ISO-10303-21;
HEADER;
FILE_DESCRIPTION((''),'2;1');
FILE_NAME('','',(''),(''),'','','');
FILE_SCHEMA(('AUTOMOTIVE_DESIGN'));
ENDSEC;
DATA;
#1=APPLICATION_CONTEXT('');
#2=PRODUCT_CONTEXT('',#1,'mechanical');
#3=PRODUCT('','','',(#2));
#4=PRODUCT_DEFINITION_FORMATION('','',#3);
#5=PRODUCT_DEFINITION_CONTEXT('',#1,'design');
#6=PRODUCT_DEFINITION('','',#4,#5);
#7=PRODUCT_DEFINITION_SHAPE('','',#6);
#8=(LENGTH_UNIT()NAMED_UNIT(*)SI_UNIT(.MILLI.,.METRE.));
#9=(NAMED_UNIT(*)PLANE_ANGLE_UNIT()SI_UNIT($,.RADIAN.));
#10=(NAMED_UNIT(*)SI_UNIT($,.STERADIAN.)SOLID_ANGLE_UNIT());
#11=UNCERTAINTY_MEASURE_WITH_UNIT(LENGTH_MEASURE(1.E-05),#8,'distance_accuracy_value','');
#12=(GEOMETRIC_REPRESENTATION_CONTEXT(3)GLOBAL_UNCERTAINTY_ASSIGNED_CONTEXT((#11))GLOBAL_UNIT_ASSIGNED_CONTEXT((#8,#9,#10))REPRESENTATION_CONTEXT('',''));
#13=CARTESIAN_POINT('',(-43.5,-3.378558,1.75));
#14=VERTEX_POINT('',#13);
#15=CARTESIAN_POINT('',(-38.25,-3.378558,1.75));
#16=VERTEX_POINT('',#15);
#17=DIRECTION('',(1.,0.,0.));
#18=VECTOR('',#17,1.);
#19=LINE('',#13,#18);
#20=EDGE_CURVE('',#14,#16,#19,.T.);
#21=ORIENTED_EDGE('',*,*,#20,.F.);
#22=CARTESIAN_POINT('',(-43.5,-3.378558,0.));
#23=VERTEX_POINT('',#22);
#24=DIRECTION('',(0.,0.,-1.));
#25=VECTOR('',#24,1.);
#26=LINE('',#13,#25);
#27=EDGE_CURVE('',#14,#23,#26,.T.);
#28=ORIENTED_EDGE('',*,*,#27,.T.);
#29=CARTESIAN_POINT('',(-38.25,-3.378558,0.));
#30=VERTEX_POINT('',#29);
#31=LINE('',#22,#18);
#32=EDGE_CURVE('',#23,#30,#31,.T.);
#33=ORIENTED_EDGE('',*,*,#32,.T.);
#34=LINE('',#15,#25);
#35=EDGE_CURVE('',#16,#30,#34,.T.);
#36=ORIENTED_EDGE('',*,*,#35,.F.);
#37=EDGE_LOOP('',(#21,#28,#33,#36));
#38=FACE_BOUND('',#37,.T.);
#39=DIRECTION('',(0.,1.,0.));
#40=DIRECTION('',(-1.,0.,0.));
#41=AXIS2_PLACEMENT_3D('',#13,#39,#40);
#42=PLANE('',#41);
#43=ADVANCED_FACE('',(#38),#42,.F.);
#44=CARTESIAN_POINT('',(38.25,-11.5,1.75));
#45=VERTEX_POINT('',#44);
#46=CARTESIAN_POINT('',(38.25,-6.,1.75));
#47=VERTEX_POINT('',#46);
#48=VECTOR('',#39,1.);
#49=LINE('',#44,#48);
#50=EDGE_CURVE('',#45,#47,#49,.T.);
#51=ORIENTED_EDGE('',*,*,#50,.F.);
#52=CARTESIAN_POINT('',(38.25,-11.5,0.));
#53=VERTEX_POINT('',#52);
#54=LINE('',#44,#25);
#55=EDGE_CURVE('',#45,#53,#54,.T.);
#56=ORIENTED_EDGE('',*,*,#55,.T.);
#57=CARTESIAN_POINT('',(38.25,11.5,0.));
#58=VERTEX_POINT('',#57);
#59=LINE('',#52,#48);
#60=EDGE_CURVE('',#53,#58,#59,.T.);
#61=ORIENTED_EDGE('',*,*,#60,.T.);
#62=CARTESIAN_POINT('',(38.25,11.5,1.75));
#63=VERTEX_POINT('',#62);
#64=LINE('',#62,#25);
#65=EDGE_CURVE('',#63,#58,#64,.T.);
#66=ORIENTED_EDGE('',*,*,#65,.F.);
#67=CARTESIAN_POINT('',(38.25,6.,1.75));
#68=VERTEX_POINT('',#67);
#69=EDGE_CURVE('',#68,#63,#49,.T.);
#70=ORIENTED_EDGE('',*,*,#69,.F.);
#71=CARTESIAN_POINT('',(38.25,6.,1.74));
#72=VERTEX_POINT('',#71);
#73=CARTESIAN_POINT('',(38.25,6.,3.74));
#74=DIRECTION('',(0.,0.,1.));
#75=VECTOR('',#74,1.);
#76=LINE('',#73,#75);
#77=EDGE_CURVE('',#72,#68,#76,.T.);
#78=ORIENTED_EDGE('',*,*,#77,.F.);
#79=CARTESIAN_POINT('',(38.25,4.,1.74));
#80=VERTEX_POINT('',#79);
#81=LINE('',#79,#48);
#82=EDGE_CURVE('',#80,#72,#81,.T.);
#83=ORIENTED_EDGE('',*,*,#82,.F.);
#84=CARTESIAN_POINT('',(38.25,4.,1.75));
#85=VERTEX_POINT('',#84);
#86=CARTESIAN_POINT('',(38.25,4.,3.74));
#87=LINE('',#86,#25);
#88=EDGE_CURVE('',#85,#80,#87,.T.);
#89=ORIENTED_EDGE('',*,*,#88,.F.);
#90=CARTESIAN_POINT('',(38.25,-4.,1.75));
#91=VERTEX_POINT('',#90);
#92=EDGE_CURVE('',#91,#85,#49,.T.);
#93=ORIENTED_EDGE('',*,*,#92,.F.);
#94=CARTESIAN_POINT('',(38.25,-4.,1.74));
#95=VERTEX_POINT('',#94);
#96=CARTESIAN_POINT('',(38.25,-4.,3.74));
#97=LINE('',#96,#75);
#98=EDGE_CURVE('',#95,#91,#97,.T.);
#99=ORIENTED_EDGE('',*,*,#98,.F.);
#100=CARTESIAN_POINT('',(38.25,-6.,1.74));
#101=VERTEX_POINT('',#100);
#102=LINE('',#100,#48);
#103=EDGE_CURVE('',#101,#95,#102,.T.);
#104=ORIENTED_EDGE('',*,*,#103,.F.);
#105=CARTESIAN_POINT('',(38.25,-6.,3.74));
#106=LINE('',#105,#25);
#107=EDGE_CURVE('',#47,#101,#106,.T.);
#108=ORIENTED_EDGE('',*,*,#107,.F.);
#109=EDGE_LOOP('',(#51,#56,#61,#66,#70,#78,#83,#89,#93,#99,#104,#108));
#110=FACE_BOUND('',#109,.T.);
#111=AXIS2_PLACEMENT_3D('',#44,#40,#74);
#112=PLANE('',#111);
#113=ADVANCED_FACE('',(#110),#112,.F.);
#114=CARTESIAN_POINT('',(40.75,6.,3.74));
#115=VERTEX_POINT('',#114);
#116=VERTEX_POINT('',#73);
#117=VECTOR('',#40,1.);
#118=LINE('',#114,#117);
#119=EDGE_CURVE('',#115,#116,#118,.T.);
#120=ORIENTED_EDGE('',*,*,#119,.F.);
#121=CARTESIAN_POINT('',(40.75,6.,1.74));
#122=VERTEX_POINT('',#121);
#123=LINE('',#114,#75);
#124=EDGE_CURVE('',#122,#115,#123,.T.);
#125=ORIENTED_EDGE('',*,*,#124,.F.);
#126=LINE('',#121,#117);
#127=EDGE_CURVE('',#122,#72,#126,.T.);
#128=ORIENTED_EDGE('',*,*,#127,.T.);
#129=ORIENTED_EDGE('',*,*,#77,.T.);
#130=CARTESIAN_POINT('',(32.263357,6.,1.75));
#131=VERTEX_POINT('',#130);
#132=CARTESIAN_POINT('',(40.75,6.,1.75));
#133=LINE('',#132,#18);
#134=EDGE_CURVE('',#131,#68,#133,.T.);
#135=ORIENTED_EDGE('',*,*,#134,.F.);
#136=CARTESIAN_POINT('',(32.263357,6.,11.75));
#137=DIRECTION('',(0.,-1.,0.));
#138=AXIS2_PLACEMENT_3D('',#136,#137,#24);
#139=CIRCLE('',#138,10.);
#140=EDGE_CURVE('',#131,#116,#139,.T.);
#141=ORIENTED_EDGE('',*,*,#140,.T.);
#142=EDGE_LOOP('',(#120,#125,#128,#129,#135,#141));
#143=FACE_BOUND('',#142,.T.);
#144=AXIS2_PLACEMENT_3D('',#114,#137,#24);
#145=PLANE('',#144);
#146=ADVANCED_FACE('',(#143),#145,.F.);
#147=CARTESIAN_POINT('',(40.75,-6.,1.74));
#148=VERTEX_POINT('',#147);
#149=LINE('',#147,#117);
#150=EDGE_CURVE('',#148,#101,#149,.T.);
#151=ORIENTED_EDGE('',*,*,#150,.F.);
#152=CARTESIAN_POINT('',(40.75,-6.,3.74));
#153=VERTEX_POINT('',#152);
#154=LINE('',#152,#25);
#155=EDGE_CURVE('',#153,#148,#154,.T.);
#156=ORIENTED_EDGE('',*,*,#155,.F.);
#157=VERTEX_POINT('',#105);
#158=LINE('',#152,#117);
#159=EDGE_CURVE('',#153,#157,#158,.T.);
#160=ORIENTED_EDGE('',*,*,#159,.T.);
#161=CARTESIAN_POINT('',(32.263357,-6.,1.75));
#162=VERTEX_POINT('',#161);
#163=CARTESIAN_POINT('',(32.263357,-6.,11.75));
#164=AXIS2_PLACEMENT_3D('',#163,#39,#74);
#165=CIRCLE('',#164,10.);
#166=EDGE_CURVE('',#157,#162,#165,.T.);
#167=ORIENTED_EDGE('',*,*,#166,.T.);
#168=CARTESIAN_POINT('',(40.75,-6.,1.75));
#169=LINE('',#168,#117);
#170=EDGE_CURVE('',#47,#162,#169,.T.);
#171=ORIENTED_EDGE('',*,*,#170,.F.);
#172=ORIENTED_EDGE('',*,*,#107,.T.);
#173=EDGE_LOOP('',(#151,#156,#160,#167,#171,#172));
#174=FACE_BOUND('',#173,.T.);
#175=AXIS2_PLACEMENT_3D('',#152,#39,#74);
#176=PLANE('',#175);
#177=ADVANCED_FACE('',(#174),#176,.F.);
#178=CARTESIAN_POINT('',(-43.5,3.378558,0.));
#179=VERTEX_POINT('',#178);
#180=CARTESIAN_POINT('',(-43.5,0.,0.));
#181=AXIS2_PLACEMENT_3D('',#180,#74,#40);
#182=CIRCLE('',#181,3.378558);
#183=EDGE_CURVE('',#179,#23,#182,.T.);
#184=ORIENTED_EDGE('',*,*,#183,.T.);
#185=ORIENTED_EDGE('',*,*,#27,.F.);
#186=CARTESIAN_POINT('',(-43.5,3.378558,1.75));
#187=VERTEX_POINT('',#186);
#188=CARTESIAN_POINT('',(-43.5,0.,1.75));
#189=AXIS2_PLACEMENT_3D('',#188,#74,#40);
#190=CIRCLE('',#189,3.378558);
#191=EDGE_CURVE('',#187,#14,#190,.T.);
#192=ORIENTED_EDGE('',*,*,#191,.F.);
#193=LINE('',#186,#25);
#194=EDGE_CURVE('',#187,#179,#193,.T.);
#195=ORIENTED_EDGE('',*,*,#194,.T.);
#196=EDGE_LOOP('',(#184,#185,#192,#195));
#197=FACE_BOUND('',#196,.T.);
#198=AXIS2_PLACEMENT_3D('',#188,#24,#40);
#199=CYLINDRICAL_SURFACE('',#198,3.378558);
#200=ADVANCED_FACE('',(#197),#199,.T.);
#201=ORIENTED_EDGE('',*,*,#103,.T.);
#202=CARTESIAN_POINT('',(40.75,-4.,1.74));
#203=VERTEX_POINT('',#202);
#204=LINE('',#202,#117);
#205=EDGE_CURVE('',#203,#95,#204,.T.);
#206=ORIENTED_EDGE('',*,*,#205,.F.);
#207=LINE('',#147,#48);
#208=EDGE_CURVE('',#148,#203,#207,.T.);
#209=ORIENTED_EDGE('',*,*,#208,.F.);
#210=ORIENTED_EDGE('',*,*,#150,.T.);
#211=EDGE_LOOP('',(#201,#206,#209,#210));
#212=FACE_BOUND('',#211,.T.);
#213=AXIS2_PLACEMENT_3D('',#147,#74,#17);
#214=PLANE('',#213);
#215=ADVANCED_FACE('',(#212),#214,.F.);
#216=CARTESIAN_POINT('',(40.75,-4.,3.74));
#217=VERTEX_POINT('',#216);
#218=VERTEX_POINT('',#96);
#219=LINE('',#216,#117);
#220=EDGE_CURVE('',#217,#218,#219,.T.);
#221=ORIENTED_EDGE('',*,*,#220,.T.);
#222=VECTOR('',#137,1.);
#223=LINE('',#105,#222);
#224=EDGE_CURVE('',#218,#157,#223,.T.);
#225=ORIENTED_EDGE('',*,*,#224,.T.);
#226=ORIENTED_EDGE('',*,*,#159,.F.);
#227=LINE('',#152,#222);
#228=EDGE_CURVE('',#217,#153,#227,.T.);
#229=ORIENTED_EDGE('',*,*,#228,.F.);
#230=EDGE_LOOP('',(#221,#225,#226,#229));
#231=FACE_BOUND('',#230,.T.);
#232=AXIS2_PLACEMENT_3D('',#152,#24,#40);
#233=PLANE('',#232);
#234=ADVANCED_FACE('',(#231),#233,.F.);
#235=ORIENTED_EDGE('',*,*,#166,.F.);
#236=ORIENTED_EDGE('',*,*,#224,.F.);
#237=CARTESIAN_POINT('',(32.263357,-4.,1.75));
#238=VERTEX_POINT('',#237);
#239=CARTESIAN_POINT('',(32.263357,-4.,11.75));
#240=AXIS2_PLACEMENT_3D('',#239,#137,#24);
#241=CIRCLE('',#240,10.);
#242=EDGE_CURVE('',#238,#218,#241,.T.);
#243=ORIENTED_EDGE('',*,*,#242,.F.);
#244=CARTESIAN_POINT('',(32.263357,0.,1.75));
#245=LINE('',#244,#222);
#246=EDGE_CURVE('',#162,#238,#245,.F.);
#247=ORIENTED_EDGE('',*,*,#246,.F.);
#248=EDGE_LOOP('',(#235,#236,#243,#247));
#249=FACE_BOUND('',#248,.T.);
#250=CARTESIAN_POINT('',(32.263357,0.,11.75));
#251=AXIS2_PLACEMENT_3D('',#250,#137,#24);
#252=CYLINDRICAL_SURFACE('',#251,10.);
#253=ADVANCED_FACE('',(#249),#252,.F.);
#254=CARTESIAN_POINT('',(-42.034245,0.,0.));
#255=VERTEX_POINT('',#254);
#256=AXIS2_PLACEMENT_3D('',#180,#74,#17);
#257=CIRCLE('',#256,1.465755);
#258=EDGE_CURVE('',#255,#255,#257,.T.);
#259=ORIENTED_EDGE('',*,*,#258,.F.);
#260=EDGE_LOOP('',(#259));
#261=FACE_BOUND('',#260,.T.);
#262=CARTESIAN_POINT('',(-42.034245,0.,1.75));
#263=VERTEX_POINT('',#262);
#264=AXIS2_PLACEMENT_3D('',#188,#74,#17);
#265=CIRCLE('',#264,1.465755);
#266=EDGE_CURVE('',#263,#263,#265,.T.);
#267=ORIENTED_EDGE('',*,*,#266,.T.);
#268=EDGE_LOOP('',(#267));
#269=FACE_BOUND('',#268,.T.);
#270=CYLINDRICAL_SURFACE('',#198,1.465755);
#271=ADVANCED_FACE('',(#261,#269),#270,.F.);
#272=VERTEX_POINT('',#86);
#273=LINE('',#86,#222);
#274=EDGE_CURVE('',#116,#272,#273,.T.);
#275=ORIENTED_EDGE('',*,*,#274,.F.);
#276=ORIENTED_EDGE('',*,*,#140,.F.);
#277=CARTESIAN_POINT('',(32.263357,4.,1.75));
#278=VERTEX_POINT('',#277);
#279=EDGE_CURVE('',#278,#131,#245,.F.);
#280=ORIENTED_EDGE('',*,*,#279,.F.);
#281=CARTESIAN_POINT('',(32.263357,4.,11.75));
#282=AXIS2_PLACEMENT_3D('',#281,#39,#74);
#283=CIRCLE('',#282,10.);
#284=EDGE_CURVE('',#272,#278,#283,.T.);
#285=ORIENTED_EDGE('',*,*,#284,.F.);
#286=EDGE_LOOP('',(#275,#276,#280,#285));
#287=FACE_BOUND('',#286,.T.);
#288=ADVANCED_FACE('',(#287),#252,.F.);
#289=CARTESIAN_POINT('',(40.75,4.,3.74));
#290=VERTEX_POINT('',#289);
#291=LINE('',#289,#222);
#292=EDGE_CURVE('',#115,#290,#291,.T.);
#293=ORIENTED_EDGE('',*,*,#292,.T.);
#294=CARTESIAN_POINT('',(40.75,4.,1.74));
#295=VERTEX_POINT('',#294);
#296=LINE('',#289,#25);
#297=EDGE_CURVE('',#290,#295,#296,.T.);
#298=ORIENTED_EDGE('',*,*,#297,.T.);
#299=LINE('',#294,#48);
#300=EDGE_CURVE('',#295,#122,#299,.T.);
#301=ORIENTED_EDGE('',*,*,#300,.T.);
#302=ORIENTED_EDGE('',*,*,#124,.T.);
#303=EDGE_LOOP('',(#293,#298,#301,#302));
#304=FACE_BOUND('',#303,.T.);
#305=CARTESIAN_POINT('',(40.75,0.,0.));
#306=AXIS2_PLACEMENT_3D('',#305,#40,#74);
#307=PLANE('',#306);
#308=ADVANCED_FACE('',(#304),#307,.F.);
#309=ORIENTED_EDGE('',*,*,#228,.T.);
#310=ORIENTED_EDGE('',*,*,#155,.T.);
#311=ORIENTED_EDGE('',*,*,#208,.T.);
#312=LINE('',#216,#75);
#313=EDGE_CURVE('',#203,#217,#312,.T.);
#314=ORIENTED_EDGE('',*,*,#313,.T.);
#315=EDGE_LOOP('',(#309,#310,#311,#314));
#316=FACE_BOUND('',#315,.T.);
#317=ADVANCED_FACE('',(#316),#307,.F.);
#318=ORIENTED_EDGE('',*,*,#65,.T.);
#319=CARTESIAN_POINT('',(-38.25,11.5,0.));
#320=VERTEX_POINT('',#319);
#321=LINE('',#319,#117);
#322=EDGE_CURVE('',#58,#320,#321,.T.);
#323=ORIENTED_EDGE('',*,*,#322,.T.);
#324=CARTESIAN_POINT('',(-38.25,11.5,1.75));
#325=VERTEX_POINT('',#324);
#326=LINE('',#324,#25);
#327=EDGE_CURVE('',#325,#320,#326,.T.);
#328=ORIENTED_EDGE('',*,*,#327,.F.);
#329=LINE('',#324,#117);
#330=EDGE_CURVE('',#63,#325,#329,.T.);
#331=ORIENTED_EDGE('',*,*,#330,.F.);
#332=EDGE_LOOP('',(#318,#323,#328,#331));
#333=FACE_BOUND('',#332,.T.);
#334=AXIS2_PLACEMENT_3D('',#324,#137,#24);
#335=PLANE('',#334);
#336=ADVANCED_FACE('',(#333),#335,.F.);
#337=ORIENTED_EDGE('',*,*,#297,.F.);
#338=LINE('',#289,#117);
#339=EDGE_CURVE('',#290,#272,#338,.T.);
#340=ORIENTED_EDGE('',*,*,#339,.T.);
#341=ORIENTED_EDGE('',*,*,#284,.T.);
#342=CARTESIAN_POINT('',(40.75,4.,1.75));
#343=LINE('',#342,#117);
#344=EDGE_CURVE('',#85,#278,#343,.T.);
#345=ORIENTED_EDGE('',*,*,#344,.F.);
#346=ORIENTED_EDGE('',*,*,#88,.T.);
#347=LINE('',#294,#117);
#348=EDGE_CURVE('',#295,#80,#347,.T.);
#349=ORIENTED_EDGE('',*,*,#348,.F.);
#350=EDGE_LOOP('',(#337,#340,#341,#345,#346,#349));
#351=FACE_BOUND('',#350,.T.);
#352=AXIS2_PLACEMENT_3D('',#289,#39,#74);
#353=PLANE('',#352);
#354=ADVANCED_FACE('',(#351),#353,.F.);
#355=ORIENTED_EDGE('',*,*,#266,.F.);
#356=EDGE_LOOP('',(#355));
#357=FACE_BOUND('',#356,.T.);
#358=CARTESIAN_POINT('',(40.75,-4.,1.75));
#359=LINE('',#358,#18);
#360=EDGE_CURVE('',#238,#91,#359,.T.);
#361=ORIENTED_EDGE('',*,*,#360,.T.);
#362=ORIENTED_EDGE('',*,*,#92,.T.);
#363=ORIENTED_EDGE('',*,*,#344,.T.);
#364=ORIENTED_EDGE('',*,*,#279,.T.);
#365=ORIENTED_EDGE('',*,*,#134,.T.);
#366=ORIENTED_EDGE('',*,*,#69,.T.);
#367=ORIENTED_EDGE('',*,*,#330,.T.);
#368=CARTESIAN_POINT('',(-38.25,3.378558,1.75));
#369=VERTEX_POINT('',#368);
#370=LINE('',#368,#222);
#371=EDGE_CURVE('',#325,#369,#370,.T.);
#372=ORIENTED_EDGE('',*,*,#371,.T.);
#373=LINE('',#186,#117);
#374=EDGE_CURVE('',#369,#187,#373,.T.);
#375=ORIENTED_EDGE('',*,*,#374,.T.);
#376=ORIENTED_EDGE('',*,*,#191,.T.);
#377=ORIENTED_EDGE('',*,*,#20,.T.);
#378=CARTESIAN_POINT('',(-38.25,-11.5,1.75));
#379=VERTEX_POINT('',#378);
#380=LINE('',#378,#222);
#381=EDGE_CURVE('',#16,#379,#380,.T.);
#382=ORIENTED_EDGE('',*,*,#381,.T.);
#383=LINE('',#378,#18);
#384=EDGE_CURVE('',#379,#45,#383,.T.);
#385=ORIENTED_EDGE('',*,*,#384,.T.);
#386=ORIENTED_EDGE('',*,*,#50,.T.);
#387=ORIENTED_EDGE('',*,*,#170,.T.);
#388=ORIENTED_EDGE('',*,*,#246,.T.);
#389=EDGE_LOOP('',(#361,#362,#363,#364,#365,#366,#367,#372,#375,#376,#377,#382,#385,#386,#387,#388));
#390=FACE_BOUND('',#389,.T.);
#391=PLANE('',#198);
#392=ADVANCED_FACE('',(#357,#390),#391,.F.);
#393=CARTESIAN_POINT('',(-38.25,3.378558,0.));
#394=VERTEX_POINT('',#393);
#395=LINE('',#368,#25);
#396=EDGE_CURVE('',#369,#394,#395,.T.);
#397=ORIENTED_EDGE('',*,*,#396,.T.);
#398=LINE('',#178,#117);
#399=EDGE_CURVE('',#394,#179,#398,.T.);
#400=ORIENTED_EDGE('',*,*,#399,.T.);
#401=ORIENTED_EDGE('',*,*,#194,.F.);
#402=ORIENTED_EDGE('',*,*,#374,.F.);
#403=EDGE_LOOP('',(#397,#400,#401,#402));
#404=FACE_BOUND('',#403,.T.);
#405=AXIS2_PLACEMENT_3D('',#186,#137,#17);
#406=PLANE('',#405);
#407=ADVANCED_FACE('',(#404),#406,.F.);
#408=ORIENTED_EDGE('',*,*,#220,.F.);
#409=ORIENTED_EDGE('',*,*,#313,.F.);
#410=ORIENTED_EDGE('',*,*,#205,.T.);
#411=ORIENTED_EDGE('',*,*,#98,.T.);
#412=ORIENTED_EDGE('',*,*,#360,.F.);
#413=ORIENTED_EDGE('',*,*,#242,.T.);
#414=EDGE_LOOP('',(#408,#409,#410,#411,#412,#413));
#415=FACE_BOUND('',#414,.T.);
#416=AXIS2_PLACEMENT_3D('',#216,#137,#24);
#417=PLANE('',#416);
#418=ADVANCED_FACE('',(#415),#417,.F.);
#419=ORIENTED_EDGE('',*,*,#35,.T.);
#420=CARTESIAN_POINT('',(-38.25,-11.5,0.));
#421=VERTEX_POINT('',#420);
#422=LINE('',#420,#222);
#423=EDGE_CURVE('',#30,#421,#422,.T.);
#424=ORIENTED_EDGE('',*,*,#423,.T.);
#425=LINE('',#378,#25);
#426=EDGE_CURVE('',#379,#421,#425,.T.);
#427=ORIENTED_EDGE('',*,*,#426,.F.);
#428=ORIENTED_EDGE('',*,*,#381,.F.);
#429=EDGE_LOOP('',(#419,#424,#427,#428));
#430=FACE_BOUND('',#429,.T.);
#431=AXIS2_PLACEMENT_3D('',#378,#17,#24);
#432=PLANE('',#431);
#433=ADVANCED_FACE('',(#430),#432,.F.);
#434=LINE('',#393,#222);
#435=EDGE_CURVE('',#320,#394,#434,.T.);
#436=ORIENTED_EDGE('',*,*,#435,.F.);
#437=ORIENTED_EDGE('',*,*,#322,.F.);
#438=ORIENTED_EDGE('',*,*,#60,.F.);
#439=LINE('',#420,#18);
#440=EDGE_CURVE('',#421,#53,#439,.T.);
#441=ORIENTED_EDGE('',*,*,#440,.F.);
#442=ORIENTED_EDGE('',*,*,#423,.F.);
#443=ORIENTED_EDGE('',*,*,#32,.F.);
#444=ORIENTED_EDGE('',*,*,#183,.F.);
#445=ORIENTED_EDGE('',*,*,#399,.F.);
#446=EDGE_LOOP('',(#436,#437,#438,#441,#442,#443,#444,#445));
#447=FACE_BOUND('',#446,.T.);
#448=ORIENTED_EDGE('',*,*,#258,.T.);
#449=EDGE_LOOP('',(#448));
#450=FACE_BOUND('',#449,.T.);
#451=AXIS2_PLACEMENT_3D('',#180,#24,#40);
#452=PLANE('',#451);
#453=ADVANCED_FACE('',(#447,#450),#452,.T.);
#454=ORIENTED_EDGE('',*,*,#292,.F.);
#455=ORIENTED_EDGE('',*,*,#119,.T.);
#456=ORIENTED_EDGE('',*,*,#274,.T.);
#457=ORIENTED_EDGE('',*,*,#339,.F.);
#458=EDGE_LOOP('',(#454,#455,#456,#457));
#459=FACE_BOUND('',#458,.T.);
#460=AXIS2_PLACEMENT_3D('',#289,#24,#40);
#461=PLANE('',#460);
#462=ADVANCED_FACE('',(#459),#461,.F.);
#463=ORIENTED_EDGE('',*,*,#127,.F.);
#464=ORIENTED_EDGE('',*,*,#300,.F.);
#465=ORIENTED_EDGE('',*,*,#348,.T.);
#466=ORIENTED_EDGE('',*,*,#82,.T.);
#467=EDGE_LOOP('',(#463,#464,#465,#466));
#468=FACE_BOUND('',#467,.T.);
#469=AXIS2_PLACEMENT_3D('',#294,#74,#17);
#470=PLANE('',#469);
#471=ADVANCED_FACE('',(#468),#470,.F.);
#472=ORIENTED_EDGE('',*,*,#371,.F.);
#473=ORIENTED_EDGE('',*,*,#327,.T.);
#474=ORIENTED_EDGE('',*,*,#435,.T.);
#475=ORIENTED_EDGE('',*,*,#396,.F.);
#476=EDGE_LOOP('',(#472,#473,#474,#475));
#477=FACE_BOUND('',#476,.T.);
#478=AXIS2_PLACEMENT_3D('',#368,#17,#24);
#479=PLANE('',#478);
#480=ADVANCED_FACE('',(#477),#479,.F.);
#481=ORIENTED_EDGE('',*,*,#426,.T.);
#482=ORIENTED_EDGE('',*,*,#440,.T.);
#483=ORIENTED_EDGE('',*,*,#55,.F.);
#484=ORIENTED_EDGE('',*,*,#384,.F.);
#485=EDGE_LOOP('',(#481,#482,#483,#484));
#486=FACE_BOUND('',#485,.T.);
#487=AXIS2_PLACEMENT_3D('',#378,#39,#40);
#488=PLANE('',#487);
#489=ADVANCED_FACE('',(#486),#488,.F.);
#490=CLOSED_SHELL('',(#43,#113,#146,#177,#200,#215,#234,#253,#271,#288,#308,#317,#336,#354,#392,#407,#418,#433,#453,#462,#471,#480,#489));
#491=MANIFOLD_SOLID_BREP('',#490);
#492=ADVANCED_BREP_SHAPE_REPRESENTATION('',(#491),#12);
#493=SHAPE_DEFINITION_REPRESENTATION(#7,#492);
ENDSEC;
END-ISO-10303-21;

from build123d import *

# Parameters (mm, degrees)
ESBO_O1_R                = 1.465754988
RESSALTO_EXTRUS_O1_DEPTH = 1.75
ESBO_O2_W                = 2
ESBO_O2_H                = 2
RESSALTO_EXTRUS_O2_DEPTH = 2.5
FILETE1_R                = 10


with BuildPart() as part:
    # Esboço1 → Ressalto-extrusão1 (new body)
    with BuildSketch(Plane(origin=(0, 0, 0), x_dir=(0, 1, 0), z_dir=(0, 0, 1))):
        with BuildLine():
            Line((3.378557636, 38.25), (11.5, 38.25))
            Line((11.5, 38.25), (11.5, -38.25))
            Line((11.5, -38.25), (-11.5, -38.25))
            Line((-11.5, -38.25), (-11.5, 38.25))
            Line((-11.5, 38.25), (-3.378557636, 38.25))
            Line((-3.378557636, 38.25), (-3.378557636, 43.5))
            ThreePointArc((-3.378557636, 43.5), (0, 46.878557636), (3.378557636, 43.5))
            Line((3.378557636, 43.5), (3.378557636, 38.25))
        make_face()
        with Locations(Location((0, 43.5, 0), (0, 0, 270))):
            Circle(ESBO_O1_R, mode=Mode.SUBTRACT)
    extrude(amount=RESSALTO_EXTRUS_O1_DEPTH)

    # Esboço2 → Ressalto-extrusão2 (add)
    with BuildSketch(Plane(origin=(38.25, 0, 0), x_dir=(0, 0, -1), z_dir=(1, 0, 0))):
        with Locations((-2.74, -5)):
            Rectangle(ESBO_O2_W, ESBO_O2_H)
        with Locations((-2.74, 5)):
            Rectangle(ESBO_O2_W, ESBO_O2_H)
    extrude(amount=RESSALTO_EXTRUS_O2_DEPTH)

    # Filete1
    # the kernel refuses this fillet: 10 mm, written as the material it adds along each edge
    with BuildSketch(Plane(origin=(38.25, 10.966608667, 1.75), x_dir=(-1, 0, 0), z_dir=(0, -1, 0))) as filete1_piece_1_section:
        with BuildLine():
            CenterArc((5.986643467, -10), FILETE1_R, 90, 36.774298296)
            Line((0, -1.99), (0, 0))
            Line((0, 0), (5.986643467, 0))
        make_face()
    filete1_piece_1 = extrude(amount=31.933217335, mode=Mode.PRIVATE)
    filete1_piece_1 = split(filete1_piece_1, bisect_by=Plane(origin=(35.424027316, 4, 2.241553218), z_dir=(0, 1, 0)), keep=Keep.TOP, mode=Mode.PRIVATE)
    filete1_piece_1 = split(filete1_piece_1, bisect_by=Plane(origin=(35.424027316, 6, 2.241553218), z_dir=(0, -1, 0)), keep=Keep.TOP, mode=Mode.PRIVATE)
    add(filete1_piece_1)
    with BuildSketch(Plane(origin=(38.25, -4, 1.75), x_dir=(-1, 0, 0), z_dir=(0, -1, 0)), Plane(origin=(38.25, 6, 1.75), x_dir=(-1, 0, 0), z_dir=(0, -1, 0))) as filete1_piece_2:
        with BuildLine():
            CenterArc((5.986643467, -10), FILETE1_R, 90, 36.774298296)
            Line((0, -1.99), (0, 0))
            Line((0, 0), (5.986643467, 0))
        make_face()
    extrude(amount=2)
    with BuildSketch(Plane(origin=(38.25, 20.966608667, 1.75), x_dir=(-1, 0, 0), z_dir=(0, -1, 0))) as filete1_piece_3_section:
        with BuildLine():
            CenterArc((5.986643467, -10), FILETE1_R, 90, 36.774298296)
            Line((0, -1.99), (0, 0))
            Line((0, 0), (5.986643467, 0))
        make_face()
    filete1_piece_3 = extrude(amount=31.933217335, mode=Mode.PRIVATE)
    filete1_piece_3 = split(filete1_piece_3, bisect_by=Plane(origin=(35.424027316, -6, 2.241553218), z_dir=(0, 1, 0)), keep=Keep.TOP, mode=Mode.PRIVATE)
    filete1_piece_3 = split(filete1_piece_3, bisect_by=Plane(origin=(35.424027316, -4, 2.241553218), z_dir=(0, -1, 0)), keep=Keep.TOP, mode=Mode.PRIVATE)
    add(filete1_piece_3)


solid = part.part
